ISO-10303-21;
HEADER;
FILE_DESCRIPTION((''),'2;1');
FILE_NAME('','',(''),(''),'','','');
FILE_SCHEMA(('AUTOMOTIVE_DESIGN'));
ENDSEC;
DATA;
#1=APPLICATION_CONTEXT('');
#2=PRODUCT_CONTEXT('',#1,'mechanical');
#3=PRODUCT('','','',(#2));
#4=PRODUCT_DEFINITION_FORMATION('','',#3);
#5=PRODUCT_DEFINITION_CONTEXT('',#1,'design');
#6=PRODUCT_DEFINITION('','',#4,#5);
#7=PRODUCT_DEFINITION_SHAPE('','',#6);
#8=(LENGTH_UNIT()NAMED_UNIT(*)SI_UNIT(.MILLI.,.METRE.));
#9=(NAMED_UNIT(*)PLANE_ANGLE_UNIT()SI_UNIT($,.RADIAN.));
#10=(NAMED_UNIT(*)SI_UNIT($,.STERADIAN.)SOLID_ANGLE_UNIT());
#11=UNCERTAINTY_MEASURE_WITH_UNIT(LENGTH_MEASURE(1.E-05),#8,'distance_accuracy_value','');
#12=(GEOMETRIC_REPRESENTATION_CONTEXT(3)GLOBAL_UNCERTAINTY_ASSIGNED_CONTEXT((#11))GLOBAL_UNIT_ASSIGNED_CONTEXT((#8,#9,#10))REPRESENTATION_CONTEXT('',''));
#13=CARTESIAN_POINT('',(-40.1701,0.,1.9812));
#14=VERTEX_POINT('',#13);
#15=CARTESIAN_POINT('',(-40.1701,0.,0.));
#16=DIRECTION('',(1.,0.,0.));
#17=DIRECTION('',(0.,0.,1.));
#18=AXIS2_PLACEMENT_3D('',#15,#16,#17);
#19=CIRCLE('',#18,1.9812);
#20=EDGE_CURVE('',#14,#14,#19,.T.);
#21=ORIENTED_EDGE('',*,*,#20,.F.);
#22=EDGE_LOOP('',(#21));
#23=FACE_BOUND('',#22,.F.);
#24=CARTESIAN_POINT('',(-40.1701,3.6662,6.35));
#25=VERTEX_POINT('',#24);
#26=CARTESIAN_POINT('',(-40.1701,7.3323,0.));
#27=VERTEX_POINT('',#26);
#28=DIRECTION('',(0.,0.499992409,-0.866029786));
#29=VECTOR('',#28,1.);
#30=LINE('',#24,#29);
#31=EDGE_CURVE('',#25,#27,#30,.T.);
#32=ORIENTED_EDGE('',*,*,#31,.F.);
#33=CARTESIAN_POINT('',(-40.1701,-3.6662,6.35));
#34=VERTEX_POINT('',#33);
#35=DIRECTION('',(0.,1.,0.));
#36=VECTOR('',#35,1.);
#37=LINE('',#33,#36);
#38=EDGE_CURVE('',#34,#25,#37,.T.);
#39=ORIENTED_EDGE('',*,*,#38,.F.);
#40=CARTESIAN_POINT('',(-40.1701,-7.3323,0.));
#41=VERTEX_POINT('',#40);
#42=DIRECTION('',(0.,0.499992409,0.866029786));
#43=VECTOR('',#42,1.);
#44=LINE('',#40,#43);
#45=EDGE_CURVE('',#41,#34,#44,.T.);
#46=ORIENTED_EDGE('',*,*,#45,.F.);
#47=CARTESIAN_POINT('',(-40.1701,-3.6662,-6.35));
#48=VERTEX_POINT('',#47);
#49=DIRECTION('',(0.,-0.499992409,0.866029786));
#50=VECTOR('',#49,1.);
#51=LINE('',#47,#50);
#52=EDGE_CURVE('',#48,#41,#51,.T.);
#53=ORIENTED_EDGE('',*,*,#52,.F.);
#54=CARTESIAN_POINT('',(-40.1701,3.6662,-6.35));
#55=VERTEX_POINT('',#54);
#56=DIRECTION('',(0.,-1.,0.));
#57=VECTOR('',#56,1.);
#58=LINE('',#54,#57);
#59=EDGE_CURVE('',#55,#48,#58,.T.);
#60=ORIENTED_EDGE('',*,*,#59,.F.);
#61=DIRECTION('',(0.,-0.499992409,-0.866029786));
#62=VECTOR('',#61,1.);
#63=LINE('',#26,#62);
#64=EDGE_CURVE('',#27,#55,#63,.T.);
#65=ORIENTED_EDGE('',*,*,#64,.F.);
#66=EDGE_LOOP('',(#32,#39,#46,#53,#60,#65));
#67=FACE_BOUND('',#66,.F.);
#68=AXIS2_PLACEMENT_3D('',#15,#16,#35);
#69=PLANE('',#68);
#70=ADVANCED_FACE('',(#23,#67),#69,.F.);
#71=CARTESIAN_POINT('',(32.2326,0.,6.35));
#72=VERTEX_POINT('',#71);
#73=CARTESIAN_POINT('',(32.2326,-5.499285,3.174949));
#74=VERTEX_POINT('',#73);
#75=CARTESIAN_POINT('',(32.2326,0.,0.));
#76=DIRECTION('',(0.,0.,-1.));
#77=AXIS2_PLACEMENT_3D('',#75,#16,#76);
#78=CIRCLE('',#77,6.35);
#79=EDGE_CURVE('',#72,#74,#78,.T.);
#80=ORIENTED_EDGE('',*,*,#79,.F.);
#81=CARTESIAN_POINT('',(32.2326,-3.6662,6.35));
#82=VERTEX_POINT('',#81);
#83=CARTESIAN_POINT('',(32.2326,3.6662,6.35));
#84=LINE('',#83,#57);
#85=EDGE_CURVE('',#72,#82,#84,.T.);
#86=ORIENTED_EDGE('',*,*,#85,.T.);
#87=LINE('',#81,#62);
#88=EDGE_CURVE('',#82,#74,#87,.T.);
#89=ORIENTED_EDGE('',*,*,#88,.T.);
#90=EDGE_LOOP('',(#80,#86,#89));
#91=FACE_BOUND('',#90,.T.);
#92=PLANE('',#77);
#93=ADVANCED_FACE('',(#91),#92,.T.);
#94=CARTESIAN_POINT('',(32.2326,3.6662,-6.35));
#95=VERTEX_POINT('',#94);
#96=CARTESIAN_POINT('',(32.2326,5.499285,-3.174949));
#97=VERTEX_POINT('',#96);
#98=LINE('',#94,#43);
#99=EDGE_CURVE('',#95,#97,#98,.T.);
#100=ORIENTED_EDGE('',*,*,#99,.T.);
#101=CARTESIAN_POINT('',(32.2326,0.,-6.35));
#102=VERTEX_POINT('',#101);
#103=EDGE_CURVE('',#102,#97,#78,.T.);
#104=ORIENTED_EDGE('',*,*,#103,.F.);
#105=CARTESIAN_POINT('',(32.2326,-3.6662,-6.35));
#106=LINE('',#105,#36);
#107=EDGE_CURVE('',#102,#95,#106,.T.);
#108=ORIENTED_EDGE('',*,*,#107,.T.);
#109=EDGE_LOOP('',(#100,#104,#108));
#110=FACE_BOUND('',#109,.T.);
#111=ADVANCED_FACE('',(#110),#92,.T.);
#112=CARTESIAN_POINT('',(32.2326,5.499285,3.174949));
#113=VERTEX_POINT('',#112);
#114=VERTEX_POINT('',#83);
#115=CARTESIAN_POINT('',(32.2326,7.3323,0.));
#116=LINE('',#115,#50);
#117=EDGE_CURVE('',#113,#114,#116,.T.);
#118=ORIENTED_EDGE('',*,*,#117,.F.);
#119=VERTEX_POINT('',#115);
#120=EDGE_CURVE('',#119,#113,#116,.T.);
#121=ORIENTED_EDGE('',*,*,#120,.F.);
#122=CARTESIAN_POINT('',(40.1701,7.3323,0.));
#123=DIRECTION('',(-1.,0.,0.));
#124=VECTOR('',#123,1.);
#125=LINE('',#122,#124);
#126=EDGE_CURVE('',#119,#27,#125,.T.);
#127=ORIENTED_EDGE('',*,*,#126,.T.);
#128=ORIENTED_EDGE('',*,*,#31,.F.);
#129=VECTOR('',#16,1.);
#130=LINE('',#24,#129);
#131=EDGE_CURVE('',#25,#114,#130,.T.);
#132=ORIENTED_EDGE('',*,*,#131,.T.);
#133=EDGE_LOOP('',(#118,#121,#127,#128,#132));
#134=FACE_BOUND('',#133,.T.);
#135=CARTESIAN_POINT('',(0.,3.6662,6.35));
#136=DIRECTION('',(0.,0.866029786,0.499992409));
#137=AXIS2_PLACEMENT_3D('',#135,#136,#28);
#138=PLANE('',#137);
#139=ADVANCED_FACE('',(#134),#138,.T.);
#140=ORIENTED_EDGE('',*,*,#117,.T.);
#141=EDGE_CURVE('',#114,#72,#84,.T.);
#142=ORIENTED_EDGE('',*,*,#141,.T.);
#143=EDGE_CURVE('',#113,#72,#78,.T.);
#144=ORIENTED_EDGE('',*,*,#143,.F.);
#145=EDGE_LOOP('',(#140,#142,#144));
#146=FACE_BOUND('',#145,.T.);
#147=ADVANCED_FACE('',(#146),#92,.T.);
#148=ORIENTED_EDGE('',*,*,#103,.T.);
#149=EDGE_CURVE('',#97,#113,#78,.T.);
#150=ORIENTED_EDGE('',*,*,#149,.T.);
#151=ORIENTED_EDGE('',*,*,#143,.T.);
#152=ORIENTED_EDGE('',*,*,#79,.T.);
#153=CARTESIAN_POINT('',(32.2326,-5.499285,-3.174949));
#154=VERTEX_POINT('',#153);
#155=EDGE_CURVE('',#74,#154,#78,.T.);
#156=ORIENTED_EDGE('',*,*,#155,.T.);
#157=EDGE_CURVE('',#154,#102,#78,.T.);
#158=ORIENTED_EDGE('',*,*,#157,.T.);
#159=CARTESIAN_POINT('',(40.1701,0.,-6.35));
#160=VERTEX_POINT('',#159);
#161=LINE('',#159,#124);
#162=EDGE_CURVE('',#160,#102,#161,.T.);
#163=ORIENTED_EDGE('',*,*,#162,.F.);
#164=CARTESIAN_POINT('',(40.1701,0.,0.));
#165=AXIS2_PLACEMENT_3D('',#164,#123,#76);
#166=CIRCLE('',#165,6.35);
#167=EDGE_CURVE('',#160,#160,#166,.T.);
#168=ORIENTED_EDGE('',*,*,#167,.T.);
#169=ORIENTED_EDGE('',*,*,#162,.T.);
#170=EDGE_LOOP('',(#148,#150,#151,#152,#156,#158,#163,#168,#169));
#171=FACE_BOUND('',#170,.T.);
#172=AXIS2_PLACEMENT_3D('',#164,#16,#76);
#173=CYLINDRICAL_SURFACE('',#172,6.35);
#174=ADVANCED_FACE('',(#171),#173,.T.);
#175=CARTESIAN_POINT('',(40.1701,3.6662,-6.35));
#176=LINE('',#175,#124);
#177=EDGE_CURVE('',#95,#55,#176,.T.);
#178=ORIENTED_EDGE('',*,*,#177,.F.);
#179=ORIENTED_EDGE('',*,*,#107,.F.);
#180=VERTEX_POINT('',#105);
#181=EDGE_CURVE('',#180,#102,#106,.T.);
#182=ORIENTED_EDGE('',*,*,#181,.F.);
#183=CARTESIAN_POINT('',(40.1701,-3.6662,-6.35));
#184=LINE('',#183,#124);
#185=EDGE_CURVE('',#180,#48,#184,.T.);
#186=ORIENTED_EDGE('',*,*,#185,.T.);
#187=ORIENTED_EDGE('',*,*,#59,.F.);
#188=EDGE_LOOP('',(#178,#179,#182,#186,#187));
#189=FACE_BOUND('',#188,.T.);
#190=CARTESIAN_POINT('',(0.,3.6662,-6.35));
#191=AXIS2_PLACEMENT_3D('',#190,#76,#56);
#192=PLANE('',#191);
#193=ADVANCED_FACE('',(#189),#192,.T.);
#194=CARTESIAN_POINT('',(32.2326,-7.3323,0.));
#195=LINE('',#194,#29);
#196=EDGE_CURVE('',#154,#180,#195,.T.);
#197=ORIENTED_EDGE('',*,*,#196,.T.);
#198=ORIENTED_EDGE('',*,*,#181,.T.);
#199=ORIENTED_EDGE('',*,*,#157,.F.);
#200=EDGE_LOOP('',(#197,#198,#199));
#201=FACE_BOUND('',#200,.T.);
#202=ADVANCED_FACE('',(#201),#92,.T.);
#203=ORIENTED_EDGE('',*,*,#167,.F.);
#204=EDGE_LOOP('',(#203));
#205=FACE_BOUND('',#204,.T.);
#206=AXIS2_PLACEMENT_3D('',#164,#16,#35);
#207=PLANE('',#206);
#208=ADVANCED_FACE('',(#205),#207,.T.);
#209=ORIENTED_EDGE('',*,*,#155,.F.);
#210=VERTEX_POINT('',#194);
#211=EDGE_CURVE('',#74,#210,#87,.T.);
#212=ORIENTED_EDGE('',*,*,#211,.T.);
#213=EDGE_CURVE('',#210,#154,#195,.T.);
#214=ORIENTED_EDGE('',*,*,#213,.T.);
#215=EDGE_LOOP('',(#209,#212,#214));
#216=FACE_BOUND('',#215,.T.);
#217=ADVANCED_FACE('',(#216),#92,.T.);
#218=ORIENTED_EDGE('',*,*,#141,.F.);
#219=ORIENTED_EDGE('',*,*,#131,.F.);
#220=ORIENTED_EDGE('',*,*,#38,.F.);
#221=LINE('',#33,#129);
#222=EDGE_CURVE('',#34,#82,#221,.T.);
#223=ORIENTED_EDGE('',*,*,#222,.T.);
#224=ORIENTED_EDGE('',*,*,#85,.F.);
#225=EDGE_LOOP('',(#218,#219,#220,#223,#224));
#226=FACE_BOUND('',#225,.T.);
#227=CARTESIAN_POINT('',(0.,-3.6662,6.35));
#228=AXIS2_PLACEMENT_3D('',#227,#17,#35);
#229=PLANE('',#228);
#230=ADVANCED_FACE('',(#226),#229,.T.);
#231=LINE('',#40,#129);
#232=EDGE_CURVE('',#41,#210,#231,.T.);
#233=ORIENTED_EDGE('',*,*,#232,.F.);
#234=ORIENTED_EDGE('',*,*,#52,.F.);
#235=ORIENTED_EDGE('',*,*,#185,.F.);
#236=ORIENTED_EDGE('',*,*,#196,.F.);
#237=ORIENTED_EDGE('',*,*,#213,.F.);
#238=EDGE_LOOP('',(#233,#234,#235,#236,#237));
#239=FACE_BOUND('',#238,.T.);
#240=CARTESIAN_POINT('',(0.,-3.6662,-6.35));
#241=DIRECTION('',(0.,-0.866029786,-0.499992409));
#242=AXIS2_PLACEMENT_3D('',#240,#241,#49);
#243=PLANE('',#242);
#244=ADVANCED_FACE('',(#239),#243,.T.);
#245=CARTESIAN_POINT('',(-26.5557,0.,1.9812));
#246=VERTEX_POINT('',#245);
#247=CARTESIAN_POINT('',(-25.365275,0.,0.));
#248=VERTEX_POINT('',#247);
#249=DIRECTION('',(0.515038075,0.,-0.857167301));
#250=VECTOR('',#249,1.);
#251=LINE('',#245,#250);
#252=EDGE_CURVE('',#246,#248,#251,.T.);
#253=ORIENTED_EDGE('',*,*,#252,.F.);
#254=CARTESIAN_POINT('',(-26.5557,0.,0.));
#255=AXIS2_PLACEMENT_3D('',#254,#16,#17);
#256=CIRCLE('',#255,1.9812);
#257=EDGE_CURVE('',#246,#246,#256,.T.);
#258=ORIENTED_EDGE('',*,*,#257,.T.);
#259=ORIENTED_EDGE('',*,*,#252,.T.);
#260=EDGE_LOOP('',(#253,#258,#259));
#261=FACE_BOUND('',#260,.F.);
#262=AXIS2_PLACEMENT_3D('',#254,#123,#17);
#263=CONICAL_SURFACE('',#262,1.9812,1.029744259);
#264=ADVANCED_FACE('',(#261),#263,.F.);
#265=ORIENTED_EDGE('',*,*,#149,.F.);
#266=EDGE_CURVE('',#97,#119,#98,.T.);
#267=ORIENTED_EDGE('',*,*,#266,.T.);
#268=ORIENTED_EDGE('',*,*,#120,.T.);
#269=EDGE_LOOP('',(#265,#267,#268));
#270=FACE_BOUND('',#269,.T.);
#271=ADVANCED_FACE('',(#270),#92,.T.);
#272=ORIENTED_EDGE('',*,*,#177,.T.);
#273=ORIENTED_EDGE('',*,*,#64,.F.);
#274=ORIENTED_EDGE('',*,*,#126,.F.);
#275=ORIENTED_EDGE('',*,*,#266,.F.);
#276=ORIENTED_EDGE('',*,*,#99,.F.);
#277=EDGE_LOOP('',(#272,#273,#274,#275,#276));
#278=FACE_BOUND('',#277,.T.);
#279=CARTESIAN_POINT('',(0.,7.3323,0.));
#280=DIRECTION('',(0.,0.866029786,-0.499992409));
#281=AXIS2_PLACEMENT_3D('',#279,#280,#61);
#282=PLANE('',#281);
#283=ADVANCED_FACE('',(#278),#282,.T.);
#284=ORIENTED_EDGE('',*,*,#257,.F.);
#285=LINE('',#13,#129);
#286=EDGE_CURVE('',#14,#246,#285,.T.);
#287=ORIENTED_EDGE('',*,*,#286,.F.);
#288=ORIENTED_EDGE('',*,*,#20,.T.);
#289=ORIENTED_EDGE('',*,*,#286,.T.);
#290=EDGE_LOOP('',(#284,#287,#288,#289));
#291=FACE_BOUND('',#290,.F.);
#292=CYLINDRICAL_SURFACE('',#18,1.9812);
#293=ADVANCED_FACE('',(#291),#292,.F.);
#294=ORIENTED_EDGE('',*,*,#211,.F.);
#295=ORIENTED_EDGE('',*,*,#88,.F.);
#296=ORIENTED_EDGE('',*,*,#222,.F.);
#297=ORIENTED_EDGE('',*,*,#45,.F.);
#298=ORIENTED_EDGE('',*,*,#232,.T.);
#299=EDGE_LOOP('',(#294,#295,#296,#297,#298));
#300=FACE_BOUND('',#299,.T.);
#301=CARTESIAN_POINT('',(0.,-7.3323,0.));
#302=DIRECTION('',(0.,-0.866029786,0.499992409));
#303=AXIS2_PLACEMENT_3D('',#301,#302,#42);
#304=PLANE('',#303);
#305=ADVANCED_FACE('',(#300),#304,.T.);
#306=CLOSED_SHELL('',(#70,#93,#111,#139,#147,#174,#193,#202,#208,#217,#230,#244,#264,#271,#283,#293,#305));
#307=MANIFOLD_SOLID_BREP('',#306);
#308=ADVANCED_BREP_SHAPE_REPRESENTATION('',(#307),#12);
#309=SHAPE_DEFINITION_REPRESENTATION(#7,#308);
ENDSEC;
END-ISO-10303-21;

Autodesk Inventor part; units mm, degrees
ref_plane "YZ Plane" through (0, 0, 0) normal (1, 0, 0) x (0, 1, 0)
ref_plane "XZ Plane" through (0, 0, 0) normal (0, 1, 0) x (-1, 0, 0)
ref_plane "XY Plane" through (0, 0, 0) normal (0, 0, 1) x (1, 0, 0)
sketch "Sketch1" plane through (0, 0, 0) normal (1, 0, 0) x (0, 1, 0)
  line L0 (3.6662, 6.35) -> (7.3323, 0)
  line L1 (7.3323, 0) -> (3.6662, -6.35)
  line L2 (3.6662, -6.35) -> (-3.6662, -6.35)
  line L3 (-3.6662, -6.35) -> (-7.3323, 0)
  line L4 (-7.3323, 0) -> (-3.6662, 6.35)
  line L5 (-3.6662, 6.35) -> (3.6662, 6.35)
  point P0 (0, 0)
  point P1 (0, 0)
  dimension "d0" = 12.7
extrude "Extrusion1" add sketch "Sketch1" along normal mid plane 80.3402
sketch "Sketch2" plane through (40.1701, 0, 0) normal (1, 0, 0) x (0, 0, -1)
  line L0 (-6.35, -3.6662) -> (0, -7.3323) projected
  line L1 (0, -7.3323) -> (6.35, -3.6662) projected
  line L2 (6.35, -3.6662) -> (6.35, 3.6662) projected
  line L3 (6.35, 3.6662) -> (0, 7.3323) projected
  line L4 (0, 7.3323) -> (-6.35, 3.6662) projected
  line L5 (-6.35, 3.6662) -> (-6.35, -3.6662) projected
  circle A0 centre (0, 0) radius 6.35
  point P0 (-3.175, 5.4993)
  point P1 (3.175, 5.4993)
  point P2 (6.35, 0)
  point P3 (3.175, -5.4993)
  point P4 (-3.175, -5.4993)
  point P5 (-6.35, 0)
  dimension "d3" = 12.7
extrude "Extrusion2" cut sketch "Sketch2" against normal blind 7.9375 contours L5 A0 L0 | A0 L1 L0 | L5 L4 A0 | A0 L2 L1 | L4 L3 A0 | A0 L3 L2
sketch "Sketch4" plane through (-40.1701, 0, 0) normal (-1, 0, 0) x (0, 0, 1)
  point P0 (0, 0)
  point P1 (0, 0)
hole "Hole1" at (-40.1701, 0, 0) direction (1, 0, 0) diameter 3.9624 depth 13.6144 tip angle 118 thread size "10-32 UNF" class "2B" standard "ANSI Unified Screw Threads"
properties part number "EL2-CGB-004" material "Aluminum 6061"
